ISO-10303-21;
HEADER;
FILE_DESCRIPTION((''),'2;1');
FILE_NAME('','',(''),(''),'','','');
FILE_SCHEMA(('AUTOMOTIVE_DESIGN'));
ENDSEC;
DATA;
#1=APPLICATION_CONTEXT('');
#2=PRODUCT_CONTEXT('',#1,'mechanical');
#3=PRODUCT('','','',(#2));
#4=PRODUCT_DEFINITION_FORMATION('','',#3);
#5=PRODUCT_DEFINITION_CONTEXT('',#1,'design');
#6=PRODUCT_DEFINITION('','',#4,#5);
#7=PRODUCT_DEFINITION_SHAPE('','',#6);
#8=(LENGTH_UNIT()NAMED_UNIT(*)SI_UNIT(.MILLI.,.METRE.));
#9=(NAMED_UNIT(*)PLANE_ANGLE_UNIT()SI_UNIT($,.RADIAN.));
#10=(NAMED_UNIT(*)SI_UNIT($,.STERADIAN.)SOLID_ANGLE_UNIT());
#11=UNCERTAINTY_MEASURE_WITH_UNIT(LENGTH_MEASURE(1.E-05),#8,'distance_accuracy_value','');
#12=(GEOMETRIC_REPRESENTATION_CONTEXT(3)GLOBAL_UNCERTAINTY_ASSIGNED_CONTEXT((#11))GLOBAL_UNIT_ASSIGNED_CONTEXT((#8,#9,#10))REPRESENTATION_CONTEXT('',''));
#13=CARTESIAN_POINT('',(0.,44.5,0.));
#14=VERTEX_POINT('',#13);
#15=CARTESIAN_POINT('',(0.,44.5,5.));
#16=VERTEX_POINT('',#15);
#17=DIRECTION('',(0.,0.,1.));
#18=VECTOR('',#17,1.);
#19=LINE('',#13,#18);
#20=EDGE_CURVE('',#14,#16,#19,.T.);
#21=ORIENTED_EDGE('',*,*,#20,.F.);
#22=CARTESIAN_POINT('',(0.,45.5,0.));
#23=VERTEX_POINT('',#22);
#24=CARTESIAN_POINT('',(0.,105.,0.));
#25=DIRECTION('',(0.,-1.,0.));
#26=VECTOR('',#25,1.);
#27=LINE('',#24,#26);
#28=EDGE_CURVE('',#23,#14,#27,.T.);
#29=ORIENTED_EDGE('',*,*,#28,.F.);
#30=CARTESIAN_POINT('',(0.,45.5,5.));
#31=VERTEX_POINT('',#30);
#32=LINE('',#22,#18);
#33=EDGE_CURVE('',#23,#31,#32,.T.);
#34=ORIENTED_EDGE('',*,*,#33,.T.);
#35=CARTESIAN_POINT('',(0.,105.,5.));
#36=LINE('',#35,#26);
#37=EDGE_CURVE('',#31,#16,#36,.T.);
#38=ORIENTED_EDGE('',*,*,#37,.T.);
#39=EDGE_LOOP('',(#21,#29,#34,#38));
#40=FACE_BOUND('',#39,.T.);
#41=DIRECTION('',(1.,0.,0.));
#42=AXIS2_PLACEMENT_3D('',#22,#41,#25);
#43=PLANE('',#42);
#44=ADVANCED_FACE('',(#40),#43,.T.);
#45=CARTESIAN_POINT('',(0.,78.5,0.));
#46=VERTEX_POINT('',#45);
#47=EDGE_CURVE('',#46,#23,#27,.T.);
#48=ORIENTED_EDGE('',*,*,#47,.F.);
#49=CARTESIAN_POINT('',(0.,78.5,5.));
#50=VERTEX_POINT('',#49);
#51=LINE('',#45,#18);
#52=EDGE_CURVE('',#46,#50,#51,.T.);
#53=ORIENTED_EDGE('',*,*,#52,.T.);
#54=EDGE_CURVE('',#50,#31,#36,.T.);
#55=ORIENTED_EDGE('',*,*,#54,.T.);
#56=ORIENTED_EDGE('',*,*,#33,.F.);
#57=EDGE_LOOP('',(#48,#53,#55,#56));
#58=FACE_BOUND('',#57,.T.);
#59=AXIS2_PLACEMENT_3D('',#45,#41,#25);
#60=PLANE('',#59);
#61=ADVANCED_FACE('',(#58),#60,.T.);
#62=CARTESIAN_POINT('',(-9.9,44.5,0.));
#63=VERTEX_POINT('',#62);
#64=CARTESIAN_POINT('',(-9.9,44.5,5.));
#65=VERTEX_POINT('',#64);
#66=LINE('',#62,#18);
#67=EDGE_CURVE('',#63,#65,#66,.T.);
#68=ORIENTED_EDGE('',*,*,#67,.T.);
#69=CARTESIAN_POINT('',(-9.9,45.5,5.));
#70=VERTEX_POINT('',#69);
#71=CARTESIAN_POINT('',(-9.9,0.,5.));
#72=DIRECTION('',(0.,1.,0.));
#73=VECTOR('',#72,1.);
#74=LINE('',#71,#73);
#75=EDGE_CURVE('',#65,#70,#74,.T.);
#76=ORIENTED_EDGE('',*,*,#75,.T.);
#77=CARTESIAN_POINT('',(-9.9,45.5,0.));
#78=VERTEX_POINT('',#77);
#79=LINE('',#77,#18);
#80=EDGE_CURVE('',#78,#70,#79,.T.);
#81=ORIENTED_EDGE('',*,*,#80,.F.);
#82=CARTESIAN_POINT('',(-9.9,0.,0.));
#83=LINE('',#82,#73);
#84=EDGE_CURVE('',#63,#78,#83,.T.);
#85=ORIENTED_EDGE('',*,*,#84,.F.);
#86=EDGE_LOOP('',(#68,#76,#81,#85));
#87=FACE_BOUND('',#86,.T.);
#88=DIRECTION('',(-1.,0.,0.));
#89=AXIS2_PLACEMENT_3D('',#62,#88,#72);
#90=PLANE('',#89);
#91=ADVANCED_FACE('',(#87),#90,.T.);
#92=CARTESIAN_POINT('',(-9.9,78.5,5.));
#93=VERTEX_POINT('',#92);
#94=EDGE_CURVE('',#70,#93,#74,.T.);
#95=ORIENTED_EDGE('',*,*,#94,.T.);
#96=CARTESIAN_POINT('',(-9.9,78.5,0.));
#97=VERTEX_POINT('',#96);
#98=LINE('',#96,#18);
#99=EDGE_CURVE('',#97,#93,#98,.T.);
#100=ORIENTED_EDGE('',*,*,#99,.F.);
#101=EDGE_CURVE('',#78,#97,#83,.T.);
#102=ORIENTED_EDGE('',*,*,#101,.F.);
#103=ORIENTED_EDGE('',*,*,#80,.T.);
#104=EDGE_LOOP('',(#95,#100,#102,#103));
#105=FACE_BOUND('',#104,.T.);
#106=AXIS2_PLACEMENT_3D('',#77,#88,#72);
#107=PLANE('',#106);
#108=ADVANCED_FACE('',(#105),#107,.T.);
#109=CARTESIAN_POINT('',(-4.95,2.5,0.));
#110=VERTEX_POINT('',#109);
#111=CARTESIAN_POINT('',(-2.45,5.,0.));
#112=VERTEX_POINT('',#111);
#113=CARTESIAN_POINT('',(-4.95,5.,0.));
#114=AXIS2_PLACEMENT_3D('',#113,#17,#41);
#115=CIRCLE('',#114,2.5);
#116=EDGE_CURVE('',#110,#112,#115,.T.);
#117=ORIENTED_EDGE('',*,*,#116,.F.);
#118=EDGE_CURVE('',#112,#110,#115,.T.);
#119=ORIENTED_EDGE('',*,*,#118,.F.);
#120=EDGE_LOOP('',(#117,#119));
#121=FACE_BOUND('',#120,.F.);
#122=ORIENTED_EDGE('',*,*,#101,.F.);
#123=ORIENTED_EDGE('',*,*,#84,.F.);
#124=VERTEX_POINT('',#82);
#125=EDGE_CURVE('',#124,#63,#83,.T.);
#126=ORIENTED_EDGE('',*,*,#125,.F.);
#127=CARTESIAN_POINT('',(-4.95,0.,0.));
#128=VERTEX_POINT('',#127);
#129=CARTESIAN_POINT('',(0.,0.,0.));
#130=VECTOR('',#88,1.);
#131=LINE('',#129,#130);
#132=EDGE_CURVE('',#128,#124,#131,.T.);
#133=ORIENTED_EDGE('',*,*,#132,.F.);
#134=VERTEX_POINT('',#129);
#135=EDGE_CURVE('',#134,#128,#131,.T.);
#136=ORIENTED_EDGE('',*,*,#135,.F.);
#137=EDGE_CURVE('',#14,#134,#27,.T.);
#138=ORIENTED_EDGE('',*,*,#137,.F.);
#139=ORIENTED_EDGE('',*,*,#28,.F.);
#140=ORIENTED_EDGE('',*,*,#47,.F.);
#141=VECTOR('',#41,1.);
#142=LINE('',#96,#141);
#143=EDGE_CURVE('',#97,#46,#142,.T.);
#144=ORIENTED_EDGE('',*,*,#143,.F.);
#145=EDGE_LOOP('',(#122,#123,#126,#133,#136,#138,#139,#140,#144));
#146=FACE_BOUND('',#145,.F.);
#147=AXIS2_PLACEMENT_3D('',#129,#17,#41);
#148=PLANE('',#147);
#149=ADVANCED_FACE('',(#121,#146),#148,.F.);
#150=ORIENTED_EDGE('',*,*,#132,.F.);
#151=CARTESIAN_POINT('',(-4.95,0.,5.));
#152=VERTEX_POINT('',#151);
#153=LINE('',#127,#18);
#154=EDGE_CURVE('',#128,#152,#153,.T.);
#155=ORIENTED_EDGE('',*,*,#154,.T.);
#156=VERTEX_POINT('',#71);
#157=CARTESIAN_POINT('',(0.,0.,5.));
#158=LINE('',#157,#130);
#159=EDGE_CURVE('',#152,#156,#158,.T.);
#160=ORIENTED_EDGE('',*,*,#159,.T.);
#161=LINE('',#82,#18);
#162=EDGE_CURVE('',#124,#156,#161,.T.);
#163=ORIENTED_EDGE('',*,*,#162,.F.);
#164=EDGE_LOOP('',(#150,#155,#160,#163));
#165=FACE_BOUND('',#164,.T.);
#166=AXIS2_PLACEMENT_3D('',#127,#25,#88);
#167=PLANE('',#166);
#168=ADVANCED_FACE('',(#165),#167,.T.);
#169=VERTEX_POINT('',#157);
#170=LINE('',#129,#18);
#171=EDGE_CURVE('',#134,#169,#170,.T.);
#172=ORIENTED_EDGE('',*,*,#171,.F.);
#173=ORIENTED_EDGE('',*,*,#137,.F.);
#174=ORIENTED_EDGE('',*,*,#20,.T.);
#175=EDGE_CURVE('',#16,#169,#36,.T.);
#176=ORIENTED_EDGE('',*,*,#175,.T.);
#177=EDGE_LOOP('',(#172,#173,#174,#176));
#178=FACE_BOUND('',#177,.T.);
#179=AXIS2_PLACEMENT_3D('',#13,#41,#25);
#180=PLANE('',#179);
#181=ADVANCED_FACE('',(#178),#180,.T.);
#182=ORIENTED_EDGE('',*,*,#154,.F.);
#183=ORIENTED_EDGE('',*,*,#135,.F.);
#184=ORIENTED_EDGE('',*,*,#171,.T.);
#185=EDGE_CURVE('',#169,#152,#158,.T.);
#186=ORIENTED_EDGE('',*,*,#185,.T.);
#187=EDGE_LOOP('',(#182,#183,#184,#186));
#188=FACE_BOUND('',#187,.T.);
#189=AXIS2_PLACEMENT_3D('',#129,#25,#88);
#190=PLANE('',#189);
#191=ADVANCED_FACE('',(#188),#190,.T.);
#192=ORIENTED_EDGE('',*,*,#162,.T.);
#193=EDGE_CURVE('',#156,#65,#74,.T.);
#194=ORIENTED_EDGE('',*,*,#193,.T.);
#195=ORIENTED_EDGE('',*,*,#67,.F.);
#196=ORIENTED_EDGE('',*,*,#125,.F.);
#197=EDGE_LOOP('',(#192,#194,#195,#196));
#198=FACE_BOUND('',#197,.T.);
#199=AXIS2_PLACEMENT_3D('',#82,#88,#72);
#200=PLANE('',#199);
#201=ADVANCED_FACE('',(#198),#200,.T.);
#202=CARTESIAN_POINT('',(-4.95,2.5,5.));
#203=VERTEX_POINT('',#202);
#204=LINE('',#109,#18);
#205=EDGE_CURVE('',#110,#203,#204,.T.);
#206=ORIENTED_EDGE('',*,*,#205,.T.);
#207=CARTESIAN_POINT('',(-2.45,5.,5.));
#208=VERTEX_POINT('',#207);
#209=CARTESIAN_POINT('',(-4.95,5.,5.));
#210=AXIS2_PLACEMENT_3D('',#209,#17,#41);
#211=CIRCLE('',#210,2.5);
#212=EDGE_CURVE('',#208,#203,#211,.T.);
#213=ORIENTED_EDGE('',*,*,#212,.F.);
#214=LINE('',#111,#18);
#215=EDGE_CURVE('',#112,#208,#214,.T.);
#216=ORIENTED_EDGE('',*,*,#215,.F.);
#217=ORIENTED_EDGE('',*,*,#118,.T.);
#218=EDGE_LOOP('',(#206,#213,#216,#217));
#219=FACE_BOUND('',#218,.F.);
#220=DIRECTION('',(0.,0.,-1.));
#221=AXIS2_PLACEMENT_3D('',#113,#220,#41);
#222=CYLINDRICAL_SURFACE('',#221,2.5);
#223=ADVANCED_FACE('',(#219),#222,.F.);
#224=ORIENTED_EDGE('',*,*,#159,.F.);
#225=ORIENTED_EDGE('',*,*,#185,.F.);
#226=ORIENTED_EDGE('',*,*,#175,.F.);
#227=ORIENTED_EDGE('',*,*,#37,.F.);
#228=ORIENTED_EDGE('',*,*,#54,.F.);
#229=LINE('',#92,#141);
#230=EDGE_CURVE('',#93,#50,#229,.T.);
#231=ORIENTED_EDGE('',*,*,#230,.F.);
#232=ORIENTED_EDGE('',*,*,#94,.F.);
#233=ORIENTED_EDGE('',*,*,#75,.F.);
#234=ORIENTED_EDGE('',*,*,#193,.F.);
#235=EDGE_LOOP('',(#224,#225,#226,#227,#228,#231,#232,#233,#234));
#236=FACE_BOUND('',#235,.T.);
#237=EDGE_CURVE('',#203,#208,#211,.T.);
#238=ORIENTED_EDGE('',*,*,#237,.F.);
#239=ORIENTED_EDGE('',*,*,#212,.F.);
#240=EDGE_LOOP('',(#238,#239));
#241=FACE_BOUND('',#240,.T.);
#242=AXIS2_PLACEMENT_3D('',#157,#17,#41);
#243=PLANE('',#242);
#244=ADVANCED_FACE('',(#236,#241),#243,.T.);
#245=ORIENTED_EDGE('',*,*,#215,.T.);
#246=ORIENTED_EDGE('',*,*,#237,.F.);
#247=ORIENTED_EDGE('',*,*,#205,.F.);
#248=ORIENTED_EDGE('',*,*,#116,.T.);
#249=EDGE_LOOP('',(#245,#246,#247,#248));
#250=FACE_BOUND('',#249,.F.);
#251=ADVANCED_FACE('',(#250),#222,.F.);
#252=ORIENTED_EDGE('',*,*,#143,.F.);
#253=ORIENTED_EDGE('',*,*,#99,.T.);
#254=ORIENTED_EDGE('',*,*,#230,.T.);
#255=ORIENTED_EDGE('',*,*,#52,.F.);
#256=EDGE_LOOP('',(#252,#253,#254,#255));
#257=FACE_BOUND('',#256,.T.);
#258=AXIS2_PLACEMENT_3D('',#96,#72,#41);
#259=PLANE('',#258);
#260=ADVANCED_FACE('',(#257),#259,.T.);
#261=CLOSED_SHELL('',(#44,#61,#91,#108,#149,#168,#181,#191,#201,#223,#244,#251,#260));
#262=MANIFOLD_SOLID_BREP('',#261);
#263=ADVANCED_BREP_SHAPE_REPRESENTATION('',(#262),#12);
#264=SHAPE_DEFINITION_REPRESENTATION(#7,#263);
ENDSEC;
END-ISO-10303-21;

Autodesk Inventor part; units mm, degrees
ref_plane "YZ Plane" through (0, 0, 0) normal (1, 0, 0) x (0, 1, 0)
ref_plane "XZ Plane" through (0, 0, 0) normal (0, 1, 0) x (-1, 0, 0)
ref_plane "XY Plane" through (0, 0, 0) normal (0, 0, 1) x (1, 0, 0)
sketch "Sketch2" plane through (0, 0, 0) normal (0, 0, 1) x (1, 0, 0)
  line L0 (0, 0) -> (-9.9, 0)
  line L1 (-9.9, 0) -> (-9.9, 105)
  line L2 (-9.9, 105) -> (0, 105)
  line L3 (0, 105) -> (0, 0)
  line L4 (-4.95, 0) -> (-4.95, 2.5)
  line L5 (-4.95, 0) -> (-2.45, 0) construction
  circle A0 centre (-4.95, 5) radius 2.5
  line L6 (-4.95, 7.5) -> (32.05, 7.5) construction
  line L7 (0, 44.5) -> (0, 0)
  line L8 (0, 0) -> (-9.9, 0)
  line L9 (-9.9, 0) -> (-9.9, 44.5)
  line L10 (0, 45.5) -> (0, 0)
  line L11 (0, 0) -> (-9.9, 0)
  line L12 (-9.9, 0) -> (-9.9, 45.5)
  line L13 (-4.95, 7.5) -> (66.05, 7.5) construction
  line L14 (-9.9, 78.5) -> (0, 78.5)
  dimension "d35" = 5
  dimension "d4" = 9.9
  dimension "d5" = 105
  dimension "d33" = 2.5
  dimension "d34" = 90
extrude "Extrusion5" add sketch "Sketch2" along normal blind 5 contours L0 L1 L14 L3
properties part number "Cube_Holder_SB_V1_(71mm)"
